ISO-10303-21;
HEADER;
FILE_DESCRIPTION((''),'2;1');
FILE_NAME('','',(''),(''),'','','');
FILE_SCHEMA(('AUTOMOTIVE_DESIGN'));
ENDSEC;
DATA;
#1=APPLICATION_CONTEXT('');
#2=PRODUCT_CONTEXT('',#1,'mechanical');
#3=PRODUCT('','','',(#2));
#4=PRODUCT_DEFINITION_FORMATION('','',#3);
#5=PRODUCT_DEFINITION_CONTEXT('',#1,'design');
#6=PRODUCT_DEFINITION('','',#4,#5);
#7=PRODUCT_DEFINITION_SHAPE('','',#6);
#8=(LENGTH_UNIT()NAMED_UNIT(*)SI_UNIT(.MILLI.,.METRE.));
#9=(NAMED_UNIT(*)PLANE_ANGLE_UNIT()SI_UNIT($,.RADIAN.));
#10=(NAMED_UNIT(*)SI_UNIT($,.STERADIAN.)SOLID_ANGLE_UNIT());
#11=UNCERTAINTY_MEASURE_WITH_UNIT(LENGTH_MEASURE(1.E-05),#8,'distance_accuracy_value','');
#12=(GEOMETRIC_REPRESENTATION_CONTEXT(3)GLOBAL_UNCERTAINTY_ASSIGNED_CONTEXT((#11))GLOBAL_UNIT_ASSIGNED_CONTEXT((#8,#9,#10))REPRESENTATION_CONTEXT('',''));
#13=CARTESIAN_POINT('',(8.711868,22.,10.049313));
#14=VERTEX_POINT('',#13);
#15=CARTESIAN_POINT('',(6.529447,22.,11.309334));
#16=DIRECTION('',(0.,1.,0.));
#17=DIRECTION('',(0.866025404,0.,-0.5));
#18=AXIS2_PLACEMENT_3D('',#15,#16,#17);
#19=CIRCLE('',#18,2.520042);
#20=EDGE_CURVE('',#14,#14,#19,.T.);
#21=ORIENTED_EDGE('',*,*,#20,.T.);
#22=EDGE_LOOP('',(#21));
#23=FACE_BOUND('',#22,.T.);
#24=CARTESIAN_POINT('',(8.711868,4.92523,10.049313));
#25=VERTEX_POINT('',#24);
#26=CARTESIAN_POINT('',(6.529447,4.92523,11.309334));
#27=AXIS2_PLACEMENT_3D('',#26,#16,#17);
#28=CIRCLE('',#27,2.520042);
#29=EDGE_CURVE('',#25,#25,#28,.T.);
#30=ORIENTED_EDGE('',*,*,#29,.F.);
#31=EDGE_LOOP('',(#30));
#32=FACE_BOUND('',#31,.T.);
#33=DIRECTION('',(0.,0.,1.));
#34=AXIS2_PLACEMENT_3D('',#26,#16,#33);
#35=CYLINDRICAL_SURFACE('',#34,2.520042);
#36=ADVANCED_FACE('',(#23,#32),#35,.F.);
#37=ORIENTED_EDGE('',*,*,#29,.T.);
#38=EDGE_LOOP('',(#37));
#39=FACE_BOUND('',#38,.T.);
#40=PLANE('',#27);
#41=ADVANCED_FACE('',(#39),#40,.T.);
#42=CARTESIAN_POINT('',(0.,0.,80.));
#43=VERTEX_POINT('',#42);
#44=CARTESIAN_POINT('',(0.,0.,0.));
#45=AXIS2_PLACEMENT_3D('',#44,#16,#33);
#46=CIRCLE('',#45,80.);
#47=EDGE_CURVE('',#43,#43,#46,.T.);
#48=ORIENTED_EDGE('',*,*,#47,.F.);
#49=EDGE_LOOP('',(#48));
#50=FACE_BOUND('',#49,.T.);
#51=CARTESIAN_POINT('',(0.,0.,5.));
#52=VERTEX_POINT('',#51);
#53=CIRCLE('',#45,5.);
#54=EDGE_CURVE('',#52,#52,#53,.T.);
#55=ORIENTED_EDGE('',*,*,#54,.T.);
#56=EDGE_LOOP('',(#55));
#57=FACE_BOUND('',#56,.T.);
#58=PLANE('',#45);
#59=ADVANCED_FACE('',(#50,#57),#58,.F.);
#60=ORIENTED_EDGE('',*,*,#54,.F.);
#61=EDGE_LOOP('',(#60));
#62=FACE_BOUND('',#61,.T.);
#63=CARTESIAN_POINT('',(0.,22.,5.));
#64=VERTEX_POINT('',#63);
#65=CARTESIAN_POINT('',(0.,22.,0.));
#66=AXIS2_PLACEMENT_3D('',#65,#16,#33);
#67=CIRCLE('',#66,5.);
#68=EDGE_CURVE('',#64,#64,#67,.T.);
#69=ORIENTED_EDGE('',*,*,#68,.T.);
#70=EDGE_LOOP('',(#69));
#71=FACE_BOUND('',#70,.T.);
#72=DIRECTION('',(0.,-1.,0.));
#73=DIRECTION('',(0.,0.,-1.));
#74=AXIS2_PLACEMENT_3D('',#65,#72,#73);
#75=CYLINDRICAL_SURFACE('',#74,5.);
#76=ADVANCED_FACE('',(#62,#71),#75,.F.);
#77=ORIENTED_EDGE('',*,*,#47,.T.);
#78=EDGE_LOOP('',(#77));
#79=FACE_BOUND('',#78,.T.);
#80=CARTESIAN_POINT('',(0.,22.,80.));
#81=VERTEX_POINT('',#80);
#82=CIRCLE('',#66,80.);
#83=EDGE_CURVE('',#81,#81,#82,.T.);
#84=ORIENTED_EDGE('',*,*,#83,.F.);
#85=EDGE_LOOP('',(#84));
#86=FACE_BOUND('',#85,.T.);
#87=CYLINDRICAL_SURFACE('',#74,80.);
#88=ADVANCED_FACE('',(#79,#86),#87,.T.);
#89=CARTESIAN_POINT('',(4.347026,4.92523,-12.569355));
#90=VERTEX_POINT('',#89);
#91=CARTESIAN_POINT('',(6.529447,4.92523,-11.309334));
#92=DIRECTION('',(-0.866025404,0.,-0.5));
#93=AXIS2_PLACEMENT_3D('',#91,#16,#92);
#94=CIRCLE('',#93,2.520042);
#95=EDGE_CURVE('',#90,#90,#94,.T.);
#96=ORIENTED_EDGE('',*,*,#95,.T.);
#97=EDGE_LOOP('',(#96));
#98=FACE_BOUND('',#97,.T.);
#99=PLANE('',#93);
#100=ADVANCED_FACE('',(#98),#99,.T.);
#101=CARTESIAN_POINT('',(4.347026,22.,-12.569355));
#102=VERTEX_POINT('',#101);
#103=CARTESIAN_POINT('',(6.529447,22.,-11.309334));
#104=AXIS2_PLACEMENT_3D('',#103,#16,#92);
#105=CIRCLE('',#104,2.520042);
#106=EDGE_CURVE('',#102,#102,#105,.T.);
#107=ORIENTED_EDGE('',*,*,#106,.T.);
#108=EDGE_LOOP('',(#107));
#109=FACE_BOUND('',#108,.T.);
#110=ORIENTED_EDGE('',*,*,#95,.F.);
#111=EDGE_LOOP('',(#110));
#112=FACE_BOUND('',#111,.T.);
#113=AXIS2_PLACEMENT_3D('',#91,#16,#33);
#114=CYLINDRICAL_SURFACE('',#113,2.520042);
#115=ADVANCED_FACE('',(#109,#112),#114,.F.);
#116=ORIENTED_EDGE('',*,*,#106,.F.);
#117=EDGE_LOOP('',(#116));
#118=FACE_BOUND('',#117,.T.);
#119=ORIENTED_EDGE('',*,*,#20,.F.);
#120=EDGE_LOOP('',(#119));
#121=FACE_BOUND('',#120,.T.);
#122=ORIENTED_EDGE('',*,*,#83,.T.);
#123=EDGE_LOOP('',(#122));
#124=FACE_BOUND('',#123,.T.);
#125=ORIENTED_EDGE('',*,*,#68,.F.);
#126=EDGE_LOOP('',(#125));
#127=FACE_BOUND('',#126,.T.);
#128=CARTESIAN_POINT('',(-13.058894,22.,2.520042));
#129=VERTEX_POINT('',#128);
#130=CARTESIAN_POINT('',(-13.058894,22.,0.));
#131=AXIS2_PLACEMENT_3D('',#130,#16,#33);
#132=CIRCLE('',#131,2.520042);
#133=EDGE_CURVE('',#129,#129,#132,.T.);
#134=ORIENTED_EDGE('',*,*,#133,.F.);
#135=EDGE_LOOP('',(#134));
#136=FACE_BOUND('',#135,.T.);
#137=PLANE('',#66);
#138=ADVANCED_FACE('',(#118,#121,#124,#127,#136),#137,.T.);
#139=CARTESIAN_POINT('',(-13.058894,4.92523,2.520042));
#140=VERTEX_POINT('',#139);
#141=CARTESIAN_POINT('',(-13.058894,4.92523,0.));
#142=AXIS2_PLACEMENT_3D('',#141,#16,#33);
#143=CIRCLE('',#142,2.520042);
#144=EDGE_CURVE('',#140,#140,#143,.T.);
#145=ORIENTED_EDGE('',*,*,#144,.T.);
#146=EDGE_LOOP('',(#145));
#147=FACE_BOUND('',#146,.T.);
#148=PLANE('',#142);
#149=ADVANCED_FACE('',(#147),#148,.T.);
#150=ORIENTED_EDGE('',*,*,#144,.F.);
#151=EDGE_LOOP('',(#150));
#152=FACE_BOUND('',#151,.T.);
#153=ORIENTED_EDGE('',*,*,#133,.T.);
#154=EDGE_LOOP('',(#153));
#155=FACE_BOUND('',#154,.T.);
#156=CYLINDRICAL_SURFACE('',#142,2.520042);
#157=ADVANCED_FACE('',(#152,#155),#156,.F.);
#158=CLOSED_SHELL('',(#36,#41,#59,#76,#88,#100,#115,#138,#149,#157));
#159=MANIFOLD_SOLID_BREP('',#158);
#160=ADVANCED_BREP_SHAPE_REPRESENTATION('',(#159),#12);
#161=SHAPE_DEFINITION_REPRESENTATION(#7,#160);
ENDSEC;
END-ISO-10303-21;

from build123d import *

# Parameters (mm, degrees)
SKETCH1_R           = 80
BOSS_EXTRUDE1_DEPTH = 22
SKETCH2_R           = 5
CUT_EXTRUDE1_DEPTH  = 116.256236274
SKETCH3_R           = 2.520042376
CUT_EXTRUDE2_DEPTH  = 17.07476964
CIRPATTERN1_COUNT   = 3


with BuildPart() as part:
    # Sketch1 → Boss-Extrude1 (new body)
    with BuildSketch(Plane(origin=(0, 0, 0), x_dir=(1, 0, 0), z_dir=(0, 1, 0))):
        Circle(SKETCH1_R)
    extrude(amount=BOSS_EXTRUDE1_DEPTH)

    # Sketch2 → Cut-Extrude1 (cut, through all)
    with BuildSketch(Plane(origin=(0, 0, 0), x_dir=(1, 0, 0), z_dir=(0, 1, 0))):
        Circle(SKETCH2_R)
    extrude(amount=CUT_EXTRUDE1_DEPTH, mode=Mode.SUBTRACT)

    # Sketch3 → Cut-Extrude2 (cut)
    with BuildSketch(Plane(origin=(0, 22, 0), x_dir=(1, 0, 0), z_dir=(0, 1, 0))):
        with Locations((-13.058893853, 0)):
            Circle(SKETCH3_R)
    cut_extrude2 = extrude(amount=-CUT_EXTRUDE2_DEPTH, mode=Mode.SUBTRACT)

    # CirPattern1: Cut-Extrude2 ×3 about axis
    cirpattern1_axis = Axis((0, 0, 0), (0, 1, 0))
    for i in range(1, CIRPATTERN1_COUNT):
        add(cut_extrude2.rotate(cirpattern1_axis, i * 360 / CIRPATTERN1_COUNT), mode=Mode.SUBTRACT)


solid = part.part
